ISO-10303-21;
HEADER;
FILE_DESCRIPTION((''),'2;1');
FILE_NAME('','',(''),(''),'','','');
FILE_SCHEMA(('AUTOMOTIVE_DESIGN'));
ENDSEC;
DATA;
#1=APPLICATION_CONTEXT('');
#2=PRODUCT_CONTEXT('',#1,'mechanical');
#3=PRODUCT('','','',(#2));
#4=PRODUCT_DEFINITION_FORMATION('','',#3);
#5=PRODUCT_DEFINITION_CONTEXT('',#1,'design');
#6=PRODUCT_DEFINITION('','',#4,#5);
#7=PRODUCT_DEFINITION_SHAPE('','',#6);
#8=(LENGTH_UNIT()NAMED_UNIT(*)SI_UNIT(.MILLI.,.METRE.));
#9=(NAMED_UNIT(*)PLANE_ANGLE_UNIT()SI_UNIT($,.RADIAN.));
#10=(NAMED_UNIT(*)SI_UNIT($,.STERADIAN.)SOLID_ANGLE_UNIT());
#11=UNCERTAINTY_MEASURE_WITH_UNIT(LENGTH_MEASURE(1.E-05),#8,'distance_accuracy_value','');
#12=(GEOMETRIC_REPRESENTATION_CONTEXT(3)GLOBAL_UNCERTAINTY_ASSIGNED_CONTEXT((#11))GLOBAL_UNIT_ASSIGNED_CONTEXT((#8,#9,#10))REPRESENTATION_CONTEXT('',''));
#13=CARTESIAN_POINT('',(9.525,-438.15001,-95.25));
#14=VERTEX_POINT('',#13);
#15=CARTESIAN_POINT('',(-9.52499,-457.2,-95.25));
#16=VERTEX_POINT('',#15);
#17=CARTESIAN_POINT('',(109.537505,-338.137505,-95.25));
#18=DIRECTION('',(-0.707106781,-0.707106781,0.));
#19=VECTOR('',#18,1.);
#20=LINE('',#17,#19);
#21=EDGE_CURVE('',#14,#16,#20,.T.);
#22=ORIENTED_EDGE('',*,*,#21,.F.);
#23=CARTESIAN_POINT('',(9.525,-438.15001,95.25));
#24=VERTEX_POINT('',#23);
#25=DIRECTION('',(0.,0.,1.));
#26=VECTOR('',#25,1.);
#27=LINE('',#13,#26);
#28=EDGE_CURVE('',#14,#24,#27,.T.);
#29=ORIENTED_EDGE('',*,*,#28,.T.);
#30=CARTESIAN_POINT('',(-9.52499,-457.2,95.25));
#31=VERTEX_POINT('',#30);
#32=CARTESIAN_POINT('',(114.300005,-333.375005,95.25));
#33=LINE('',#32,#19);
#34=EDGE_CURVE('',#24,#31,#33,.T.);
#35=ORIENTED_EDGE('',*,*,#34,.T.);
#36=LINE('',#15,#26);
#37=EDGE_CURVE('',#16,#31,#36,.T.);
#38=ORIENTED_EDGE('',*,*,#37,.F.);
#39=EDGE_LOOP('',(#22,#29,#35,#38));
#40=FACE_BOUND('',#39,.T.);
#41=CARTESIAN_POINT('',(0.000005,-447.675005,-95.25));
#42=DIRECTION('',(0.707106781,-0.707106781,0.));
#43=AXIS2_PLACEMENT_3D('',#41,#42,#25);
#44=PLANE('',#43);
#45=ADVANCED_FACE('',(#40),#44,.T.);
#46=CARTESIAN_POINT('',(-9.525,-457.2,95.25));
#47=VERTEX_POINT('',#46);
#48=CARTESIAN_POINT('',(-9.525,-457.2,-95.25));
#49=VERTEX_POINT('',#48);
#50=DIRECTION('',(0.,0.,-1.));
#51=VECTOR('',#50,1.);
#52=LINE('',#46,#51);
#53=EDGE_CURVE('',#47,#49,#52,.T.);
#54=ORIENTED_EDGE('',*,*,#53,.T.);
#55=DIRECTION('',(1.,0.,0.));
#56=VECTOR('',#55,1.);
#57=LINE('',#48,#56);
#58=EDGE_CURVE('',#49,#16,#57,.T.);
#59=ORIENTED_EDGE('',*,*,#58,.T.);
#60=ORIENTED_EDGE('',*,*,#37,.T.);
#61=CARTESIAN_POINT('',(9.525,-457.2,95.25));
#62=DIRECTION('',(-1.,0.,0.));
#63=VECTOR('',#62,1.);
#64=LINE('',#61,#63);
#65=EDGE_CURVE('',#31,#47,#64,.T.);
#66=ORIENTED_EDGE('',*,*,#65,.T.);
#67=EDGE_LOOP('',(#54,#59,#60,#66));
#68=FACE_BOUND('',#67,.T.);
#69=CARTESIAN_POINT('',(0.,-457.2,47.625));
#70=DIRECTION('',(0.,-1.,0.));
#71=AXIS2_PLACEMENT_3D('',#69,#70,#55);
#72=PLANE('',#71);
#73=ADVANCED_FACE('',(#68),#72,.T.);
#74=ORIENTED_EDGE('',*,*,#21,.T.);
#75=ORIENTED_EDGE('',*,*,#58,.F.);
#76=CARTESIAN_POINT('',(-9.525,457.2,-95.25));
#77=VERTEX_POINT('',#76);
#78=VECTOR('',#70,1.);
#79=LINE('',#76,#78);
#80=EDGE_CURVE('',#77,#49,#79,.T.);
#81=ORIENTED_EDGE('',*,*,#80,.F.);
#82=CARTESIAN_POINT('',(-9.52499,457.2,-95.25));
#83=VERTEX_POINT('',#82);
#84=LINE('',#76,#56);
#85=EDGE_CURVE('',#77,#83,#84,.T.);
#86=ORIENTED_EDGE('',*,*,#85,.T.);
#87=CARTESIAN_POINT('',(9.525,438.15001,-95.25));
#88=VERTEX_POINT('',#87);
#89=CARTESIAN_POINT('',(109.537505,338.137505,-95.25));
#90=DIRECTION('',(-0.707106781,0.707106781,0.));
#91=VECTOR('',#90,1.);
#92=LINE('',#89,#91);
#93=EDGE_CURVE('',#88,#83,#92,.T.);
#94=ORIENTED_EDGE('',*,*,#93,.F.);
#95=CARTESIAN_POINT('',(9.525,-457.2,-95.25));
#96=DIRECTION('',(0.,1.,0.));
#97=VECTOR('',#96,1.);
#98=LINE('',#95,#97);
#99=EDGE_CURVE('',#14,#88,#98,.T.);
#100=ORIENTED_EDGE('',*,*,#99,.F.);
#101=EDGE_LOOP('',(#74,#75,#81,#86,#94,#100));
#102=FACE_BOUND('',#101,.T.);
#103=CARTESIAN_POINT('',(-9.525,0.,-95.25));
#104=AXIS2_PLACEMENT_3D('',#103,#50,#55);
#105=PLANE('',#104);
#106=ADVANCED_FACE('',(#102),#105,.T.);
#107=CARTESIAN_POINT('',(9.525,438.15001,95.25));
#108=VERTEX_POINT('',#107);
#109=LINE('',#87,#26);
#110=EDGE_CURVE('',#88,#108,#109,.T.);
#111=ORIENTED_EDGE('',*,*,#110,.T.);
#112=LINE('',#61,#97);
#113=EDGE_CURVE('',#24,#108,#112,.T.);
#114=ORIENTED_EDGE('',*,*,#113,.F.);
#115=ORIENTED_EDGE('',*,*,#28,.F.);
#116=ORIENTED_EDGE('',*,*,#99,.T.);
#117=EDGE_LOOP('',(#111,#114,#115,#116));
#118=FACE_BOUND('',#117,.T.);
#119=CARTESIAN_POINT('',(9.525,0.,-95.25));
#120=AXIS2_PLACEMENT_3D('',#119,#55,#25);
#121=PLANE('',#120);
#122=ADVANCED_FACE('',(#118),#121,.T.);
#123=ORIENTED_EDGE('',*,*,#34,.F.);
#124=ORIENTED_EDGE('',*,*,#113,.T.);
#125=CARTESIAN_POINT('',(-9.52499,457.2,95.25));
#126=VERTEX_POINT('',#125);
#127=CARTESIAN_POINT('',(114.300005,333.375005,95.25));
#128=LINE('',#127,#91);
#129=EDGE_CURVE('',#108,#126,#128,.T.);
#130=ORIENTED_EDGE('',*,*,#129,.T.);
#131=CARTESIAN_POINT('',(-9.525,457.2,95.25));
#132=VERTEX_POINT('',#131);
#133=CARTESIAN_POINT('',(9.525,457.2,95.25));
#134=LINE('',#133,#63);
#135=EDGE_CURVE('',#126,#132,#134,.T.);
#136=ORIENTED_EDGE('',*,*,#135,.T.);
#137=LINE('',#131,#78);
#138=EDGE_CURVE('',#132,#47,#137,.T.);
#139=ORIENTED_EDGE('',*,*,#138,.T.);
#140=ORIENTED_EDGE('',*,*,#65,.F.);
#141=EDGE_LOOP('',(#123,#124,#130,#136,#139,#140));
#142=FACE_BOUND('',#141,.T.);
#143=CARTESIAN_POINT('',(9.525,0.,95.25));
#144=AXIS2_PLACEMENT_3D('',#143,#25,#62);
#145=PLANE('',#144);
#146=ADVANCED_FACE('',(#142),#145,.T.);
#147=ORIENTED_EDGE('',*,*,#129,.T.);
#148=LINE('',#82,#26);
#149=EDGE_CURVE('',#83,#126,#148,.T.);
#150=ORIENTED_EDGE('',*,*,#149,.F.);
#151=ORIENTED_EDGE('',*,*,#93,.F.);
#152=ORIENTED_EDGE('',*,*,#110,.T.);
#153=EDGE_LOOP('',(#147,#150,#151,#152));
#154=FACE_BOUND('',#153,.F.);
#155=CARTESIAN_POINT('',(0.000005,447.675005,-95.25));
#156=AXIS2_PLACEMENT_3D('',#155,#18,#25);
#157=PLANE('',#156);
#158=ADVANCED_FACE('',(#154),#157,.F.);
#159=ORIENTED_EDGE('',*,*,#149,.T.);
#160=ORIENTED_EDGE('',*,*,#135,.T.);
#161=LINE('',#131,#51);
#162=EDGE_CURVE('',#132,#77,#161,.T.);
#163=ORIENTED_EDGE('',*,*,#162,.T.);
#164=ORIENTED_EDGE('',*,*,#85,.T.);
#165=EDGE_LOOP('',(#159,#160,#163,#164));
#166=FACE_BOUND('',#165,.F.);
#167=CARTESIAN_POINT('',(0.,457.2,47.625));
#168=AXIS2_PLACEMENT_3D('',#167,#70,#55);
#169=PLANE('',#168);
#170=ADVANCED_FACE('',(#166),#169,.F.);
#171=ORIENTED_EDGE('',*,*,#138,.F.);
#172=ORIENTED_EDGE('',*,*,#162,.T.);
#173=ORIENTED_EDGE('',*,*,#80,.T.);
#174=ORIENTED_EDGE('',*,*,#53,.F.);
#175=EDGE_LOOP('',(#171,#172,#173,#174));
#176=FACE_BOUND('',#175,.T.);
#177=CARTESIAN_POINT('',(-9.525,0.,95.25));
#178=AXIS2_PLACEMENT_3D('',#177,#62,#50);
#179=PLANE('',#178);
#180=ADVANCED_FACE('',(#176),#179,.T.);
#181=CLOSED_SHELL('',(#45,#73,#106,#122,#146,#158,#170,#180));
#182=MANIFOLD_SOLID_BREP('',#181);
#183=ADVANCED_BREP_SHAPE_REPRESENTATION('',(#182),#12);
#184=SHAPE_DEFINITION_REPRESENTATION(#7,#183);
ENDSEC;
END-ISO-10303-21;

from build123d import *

# Parameters (mm, degrees)
F0_W     = 9.525
F0_H     = 95.25
F1_DEPTH = 457.2
F2_SIZE  = 19.04999


# Not quite as in the source:
# - a fillet or chamfer is up to 0.001 mm smaller than in the source, because OpenCascade refuses the exact size


with BuildPart() as f1:
    # F0 (on Front) → F1 (new body, symmetric)
    with BuildSketch(Plane.XZ):
        Polygon((9.525, 95.25), (-9.525, 95.25), (-9.525, 0), (0, 0), (9.525, 0), align=None)
        with Locations((-4.7625, -47.625)):
            Rectangle(F0_W, F0_H)
        with Locations((4.7625, -47.625)):
            Rectangle(F0_W, F0_H)
    extrude(amount=F1_DEPTH, both=True)

    # F2 (size 19.05 in the source; OpenCascade refuses exactly that, so slightly less here)
    f2_edges = [f1.edges().sort_by_distance(p)[0] for p in [
        (9.525, -457.2, 0),
        (9.525, 457.2, 0),
    ]]
    chamfer(f2_edges, length=F2_SIZE)


solid = f1.part
